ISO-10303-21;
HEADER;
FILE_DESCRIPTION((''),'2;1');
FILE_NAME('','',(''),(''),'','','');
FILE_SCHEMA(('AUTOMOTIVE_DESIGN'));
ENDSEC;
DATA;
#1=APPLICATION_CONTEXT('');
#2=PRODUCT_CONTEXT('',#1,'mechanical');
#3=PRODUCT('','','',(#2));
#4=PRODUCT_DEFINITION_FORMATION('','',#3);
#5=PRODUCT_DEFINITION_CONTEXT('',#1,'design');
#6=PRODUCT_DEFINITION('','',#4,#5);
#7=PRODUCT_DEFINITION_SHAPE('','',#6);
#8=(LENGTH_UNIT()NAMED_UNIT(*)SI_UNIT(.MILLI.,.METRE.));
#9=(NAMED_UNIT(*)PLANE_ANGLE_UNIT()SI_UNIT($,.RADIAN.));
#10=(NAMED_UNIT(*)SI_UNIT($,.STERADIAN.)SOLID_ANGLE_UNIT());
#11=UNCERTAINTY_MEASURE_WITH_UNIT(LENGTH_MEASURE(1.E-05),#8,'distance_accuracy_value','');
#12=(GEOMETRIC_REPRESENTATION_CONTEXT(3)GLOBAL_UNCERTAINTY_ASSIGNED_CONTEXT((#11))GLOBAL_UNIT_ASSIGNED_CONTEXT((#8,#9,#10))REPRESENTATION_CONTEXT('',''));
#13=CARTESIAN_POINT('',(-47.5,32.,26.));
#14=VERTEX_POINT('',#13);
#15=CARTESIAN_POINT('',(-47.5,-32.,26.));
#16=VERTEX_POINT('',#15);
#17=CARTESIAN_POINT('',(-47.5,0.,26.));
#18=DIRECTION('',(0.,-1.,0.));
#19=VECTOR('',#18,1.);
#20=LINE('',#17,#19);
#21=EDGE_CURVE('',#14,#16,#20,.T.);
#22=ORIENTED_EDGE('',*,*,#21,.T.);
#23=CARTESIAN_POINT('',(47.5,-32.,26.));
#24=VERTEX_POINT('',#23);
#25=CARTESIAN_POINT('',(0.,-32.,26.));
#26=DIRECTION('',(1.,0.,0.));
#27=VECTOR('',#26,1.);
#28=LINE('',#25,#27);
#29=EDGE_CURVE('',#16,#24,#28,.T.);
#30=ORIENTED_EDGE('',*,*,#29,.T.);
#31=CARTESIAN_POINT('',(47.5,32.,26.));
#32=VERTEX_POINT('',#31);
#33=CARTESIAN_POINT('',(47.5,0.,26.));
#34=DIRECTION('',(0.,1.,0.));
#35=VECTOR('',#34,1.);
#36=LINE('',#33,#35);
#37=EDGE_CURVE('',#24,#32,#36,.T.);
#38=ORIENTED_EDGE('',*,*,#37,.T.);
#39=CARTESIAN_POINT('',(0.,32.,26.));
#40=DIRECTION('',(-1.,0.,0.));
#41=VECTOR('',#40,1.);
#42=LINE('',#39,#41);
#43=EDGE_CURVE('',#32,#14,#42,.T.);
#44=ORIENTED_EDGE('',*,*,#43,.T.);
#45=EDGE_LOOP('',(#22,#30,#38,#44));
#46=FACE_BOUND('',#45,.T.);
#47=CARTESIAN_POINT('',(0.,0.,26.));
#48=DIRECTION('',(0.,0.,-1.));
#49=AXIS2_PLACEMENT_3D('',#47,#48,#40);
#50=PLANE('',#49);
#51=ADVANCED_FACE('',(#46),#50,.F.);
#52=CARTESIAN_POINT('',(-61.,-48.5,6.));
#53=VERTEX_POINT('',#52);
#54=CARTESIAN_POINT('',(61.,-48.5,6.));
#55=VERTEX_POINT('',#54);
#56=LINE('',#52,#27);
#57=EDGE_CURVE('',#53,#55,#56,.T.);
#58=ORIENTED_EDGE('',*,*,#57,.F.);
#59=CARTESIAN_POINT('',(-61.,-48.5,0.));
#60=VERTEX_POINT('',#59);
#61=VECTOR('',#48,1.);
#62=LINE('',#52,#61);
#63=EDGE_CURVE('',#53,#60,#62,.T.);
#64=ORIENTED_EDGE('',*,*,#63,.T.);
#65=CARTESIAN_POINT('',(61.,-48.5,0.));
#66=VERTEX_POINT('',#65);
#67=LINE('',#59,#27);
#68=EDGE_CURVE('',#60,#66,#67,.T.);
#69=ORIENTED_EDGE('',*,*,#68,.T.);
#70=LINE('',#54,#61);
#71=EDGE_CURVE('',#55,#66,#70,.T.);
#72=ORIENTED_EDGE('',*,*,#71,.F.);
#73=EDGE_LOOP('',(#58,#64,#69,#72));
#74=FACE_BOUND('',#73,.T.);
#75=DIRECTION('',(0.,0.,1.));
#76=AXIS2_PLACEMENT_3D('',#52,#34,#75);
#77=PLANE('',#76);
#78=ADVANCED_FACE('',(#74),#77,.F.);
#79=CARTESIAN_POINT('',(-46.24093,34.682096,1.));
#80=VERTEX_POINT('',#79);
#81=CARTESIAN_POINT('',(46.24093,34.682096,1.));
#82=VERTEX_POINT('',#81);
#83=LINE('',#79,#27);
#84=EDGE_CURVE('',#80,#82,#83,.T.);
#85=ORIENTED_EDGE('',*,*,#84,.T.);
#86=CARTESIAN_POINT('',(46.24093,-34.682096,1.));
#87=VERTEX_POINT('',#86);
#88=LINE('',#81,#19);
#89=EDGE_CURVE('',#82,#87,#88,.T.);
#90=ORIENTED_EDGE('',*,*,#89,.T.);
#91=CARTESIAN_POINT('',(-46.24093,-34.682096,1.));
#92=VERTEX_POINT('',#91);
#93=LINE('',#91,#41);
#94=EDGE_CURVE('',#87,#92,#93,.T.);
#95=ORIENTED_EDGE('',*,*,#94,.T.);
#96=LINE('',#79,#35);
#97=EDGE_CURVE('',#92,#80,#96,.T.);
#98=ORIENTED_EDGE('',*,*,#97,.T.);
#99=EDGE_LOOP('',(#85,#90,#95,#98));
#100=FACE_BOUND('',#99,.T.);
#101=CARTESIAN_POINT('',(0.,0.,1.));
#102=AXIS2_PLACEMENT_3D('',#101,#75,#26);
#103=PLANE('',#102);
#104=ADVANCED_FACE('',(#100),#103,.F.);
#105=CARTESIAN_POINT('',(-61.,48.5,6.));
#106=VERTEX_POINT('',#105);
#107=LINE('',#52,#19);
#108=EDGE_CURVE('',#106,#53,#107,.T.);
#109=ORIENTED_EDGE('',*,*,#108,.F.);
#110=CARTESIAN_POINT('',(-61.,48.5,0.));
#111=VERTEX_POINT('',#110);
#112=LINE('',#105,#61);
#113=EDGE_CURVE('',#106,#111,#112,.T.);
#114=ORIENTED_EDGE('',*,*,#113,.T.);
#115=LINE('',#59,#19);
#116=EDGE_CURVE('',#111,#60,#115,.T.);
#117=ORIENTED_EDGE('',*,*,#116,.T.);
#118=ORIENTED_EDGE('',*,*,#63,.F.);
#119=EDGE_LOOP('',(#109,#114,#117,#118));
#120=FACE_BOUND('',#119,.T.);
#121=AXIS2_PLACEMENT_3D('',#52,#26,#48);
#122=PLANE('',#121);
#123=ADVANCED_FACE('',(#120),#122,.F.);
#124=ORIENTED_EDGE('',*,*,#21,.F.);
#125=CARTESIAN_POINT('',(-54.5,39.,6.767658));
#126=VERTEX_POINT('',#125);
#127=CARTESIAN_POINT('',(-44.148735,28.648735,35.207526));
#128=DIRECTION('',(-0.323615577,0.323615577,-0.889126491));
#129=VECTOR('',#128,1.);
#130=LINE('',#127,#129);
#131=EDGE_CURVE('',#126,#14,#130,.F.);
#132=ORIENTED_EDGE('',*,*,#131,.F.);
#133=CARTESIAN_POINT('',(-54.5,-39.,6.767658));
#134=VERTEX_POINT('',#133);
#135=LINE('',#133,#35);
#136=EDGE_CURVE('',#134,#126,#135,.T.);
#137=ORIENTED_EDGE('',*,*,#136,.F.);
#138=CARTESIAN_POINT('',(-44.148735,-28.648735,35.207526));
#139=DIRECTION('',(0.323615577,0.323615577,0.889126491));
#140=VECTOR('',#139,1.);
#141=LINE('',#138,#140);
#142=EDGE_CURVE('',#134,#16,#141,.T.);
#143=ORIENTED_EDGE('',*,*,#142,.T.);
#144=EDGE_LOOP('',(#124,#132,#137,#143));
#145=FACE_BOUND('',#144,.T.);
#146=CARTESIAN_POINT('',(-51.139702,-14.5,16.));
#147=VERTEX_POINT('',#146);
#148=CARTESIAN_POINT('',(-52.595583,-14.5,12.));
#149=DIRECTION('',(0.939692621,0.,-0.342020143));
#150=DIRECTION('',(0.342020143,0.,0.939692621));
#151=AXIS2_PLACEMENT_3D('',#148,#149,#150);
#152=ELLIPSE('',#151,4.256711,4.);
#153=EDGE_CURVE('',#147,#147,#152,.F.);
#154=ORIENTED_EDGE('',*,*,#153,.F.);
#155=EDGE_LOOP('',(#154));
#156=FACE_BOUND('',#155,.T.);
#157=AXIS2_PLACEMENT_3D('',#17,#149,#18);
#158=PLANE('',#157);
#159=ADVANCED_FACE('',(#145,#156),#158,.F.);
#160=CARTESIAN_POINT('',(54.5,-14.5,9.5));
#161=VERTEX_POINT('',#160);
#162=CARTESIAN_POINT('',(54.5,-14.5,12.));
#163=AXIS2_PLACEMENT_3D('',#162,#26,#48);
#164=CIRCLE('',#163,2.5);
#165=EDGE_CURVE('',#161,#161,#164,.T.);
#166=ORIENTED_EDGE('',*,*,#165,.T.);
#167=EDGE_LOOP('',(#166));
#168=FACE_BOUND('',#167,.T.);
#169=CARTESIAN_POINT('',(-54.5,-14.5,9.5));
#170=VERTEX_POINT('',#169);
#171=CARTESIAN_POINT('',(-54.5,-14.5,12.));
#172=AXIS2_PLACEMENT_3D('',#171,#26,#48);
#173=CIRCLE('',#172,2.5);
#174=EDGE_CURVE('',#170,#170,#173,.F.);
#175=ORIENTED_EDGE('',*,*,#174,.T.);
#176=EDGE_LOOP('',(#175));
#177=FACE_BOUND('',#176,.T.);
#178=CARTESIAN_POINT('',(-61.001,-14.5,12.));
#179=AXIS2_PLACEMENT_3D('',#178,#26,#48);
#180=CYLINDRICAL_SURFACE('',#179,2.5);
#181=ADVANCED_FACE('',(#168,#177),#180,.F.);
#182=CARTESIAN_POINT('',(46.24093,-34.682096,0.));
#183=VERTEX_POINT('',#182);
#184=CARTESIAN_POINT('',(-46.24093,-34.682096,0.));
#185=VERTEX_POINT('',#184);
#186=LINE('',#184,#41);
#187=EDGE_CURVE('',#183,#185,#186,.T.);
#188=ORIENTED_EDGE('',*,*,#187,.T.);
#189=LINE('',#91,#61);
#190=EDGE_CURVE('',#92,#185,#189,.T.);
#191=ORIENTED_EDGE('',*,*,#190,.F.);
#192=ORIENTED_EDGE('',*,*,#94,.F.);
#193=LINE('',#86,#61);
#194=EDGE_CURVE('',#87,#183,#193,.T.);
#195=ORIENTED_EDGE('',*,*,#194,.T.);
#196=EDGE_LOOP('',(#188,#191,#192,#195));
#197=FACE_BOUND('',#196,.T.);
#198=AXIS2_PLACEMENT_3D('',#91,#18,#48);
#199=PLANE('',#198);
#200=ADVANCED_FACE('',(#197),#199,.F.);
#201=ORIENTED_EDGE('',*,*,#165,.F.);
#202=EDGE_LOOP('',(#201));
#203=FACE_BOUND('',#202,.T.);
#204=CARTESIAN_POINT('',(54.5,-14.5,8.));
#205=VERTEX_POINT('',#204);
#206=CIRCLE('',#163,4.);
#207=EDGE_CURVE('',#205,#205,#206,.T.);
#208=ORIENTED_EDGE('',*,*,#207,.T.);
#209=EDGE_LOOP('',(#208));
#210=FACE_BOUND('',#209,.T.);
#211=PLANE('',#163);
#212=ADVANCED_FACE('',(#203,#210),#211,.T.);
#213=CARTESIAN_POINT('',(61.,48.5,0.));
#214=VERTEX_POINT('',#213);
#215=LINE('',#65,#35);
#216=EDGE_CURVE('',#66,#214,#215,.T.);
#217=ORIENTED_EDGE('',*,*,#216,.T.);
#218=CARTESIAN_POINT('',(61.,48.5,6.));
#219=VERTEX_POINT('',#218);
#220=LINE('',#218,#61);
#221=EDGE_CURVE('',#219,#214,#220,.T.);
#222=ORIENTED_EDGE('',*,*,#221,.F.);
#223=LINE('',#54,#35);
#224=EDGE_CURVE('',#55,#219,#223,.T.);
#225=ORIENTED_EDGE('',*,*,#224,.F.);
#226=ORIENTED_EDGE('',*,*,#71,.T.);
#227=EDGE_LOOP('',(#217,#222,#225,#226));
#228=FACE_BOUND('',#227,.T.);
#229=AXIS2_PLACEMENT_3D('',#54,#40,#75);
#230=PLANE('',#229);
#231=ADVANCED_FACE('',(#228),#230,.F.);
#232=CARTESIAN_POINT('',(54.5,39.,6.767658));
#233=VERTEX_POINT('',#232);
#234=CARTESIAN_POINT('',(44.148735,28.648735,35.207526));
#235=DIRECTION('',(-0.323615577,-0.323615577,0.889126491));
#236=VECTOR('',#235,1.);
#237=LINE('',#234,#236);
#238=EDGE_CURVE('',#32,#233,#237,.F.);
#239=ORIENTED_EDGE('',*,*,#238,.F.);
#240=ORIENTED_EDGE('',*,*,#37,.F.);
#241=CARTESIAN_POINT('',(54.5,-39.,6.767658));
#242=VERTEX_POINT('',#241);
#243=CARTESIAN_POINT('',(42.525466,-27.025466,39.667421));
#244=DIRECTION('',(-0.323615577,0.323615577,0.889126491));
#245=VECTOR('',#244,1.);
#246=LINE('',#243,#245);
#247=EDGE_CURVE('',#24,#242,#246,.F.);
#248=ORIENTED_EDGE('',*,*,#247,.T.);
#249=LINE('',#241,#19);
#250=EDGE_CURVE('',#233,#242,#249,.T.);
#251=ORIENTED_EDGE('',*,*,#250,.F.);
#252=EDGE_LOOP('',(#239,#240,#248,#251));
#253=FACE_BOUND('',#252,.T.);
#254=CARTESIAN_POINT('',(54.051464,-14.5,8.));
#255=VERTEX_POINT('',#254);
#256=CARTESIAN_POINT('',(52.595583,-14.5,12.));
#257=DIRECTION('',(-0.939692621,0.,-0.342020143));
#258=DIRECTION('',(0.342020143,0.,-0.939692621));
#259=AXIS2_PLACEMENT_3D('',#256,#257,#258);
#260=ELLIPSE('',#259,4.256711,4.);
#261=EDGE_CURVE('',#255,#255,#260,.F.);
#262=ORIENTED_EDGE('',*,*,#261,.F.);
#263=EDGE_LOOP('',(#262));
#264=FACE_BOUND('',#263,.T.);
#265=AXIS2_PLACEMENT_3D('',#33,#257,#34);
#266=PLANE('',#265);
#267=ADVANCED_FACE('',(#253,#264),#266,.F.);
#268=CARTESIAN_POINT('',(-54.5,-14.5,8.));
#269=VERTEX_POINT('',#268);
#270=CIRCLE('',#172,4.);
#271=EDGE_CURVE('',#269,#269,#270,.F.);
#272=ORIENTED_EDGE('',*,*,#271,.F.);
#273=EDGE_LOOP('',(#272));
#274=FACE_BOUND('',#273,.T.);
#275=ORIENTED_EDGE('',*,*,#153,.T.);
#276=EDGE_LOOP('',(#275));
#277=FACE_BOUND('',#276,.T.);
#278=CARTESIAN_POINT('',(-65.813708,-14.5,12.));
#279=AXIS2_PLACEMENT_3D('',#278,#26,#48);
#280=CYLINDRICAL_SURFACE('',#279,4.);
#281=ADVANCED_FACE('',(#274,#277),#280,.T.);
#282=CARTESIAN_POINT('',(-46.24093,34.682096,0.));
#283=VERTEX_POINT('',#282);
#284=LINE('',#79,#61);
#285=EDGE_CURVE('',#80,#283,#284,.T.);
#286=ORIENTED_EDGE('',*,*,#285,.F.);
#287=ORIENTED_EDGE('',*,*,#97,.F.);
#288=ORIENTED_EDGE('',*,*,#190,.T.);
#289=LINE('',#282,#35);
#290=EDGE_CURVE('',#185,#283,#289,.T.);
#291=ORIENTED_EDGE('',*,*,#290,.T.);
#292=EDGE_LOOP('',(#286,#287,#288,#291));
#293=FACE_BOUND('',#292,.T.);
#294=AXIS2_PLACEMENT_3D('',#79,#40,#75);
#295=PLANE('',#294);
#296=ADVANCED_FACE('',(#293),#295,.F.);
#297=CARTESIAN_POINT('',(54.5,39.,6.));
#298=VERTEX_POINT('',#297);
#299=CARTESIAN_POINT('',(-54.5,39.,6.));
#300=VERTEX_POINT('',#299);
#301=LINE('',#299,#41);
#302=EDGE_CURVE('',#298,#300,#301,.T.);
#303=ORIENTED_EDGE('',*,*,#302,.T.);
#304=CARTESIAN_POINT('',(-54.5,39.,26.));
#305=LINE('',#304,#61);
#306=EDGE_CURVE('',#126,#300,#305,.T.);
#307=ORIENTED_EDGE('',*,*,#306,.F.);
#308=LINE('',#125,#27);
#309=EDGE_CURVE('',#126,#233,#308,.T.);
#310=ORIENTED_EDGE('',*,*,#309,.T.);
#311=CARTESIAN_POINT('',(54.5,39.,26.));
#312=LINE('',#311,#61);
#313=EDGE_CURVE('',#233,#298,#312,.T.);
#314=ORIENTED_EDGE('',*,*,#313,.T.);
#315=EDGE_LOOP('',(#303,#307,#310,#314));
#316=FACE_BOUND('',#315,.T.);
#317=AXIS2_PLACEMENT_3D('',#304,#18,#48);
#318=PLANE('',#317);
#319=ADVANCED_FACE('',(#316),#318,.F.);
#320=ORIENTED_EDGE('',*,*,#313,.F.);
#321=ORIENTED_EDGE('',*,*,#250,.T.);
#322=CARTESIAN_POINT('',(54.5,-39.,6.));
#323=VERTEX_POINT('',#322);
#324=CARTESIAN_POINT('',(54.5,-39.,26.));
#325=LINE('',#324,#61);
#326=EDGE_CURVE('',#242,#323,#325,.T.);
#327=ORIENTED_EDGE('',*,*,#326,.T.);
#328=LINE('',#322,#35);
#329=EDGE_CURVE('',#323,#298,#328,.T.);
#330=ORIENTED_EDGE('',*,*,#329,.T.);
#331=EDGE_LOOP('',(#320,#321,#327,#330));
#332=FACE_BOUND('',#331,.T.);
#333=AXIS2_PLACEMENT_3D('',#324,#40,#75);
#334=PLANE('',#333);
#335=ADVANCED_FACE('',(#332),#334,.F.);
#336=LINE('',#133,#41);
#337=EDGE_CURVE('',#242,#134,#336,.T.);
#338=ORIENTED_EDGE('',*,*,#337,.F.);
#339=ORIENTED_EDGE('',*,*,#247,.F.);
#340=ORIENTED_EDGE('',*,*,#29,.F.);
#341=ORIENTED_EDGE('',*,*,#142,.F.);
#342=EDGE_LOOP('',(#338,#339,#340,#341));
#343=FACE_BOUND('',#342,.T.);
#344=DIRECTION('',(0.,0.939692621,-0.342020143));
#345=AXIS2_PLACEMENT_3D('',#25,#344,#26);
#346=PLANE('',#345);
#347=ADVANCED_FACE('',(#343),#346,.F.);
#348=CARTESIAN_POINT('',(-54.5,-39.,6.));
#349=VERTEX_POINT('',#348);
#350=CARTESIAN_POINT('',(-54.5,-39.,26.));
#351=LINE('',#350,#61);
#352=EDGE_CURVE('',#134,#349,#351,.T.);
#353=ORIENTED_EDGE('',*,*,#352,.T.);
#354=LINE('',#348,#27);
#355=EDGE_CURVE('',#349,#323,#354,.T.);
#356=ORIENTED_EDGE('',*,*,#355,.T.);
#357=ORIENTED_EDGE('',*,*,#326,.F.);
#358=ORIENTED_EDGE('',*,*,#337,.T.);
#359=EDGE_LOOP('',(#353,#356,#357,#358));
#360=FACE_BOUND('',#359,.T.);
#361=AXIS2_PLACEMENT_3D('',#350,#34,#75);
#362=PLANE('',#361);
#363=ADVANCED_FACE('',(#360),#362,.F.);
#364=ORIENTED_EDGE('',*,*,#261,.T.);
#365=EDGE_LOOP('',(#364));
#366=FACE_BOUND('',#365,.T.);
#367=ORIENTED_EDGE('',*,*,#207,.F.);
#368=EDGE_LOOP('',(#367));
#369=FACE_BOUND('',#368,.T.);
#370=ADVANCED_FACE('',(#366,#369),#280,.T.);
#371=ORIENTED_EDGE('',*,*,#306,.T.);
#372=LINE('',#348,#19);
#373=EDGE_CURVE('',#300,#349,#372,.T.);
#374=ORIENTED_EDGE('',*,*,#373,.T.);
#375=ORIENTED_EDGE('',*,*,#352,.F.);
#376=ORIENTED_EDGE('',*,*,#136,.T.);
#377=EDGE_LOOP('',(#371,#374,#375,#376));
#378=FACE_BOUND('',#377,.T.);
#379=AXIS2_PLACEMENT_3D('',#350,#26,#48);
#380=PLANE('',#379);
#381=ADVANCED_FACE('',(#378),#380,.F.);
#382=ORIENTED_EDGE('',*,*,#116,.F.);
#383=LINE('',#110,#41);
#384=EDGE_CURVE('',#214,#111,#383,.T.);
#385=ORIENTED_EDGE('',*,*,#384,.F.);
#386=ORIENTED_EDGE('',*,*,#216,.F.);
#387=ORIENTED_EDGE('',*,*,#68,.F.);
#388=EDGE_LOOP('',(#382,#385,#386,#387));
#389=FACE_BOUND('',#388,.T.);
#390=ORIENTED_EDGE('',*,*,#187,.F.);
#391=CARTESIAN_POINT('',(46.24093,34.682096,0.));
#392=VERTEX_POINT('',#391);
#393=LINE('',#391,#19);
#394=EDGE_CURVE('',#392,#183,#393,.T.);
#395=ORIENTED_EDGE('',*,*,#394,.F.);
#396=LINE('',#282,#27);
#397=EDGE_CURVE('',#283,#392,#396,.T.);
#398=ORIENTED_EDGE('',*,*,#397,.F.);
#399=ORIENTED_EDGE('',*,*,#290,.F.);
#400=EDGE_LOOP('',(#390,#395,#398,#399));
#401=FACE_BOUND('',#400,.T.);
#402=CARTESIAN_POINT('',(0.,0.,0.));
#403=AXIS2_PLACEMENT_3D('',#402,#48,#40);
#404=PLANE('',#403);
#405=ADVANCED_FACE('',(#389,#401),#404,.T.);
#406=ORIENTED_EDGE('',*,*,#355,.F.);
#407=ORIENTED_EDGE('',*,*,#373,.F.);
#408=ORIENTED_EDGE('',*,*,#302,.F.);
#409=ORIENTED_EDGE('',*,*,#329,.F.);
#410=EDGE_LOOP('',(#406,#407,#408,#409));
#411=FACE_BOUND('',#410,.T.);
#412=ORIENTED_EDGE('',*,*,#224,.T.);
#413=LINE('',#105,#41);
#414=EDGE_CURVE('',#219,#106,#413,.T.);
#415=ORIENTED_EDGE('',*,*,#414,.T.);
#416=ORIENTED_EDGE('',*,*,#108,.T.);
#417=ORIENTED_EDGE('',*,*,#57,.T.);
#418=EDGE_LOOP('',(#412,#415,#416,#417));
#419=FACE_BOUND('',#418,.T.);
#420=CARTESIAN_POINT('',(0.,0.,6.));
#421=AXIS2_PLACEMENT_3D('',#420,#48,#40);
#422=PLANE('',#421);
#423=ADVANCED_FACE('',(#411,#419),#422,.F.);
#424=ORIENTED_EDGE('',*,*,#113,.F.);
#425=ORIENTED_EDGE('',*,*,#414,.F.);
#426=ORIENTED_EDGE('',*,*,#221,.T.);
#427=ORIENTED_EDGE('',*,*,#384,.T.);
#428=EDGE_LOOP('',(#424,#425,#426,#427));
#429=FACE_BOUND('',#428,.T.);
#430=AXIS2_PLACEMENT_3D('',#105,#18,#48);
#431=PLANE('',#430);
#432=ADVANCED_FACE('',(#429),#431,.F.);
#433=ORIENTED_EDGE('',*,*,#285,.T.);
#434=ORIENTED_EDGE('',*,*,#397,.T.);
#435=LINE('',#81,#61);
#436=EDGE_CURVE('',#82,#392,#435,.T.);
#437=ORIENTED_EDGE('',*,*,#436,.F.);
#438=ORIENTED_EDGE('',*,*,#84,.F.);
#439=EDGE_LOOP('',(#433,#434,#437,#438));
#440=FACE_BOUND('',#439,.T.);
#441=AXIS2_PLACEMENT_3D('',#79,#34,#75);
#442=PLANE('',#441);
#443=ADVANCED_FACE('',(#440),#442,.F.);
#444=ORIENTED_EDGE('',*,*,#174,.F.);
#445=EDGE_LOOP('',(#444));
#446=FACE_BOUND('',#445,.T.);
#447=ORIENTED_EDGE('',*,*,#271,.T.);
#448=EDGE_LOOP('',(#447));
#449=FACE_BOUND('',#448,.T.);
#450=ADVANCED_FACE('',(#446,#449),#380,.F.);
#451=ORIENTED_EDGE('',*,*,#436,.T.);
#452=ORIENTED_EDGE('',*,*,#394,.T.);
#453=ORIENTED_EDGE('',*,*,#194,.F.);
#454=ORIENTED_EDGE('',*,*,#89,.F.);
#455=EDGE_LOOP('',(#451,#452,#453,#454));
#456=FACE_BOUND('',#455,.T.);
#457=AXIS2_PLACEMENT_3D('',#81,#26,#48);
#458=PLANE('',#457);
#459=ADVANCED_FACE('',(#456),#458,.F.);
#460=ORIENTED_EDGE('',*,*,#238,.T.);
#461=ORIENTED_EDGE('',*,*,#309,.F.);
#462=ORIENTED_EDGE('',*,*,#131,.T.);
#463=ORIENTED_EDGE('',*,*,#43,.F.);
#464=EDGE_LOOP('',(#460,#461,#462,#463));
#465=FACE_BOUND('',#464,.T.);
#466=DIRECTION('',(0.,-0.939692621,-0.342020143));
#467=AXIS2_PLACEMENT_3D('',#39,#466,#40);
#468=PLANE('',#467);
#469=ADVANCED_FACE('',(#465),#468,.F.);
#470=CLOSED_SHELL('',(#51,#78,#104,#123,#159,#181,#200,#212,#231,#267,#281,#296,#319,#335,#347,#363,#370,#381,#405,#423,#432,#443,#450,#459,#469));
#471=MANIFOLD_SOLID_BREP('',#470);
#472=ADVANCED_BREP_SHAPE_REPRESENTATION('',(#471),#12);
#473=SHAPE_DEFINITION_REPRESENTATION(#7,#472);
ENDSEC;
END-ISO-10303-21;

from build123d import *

# Parameters (mm, degrees)
SKIZZE1_W                       = 122
SKIZZE1_H                       = 97
AUFSATZ_LINEAR_AUSTRAGEN1_DEPTH = 6
SKIZZE2_W                       = 109
SKIZZE2_H                       = 78
AUFSATZ_LINEAR_AUSTRAGEN2_DEPTH = 20
SCHNITT_LINEAR_AUSTRAGEN1_REACH = 129.939
SKIZZE3_R                       = 2.5
FASE1_SIZE                      = 19.232341936
FASE1_SIZE_2                    = 7
AUFSATZ_LINEAR_AUSTRAGEN3_REACH = 129.939
SKIZZE4_R                       = 4
SKIZZE4_R_2                     = 2.5
SKIZZE5_W                       = 92.481860848
SKIZZE5_H                       = 69.364192104
SCHNITT_LINEAR_AUSTRAGEN2_DEPTH = 1


with BuildPart() as part:
    # Skizze1 → Aufsatz-Linear austragen1 (new body)
    with BuildSketch(Plane.XY):
        Rectangle(SKIZZE1_W, SKIZZE1_H)
    extrude(amount=AUFSATZ_LINEAR_AUSTRAGEN1_DEPTH)

    # Skizze2 → Aufsatz-Linear austragen2 (add)
    with BuildSketch(Plane.XY.offset(6)):
        Rectangle(SKIZZE2_W, SKIZZE2_H)
    extrude(amount=AUFSATZ_LINEAR_AUSTRAGEN2_DEPTH)

    # Skizze3 → Schnitt-Linear austragen1 (cut, up to next)
    with BuildSketch(Plane(origin=(54.5, 0, 0), x_dir=(0, 0, -1), z_dir=(1, 0, 0)), mode=Mode.PRIVATE) as schnitt_linear_austragen1_sk1:
        with Locations((-12, -14.5)):
            Circle(SKIZZE3_R)
    schnitt_linear_austragen1_tool1 = extrude(schnitt_linear_austragen1_sk1.sketch, amount=-SCHNITT_LINEAR_AUSTRAGEN1_REACH, mode=Mode.PRIVATE) & part.part
    add(schnitt_linear_austragen1_tool1.solids().sort_by_distance((54.5, -14.5, 12))[0], mode=Mode.SUBTRACT)

    # Fase1
    # the kernel refuses this chamfer: 19.232341936, 7 mm, written as the material it takes off along each edge
    with BuildSketch(Plane(origin=(54.5, -88.892440145, 26), x_dir=(0.013184058198645607, 0, -0.9999130865277316), z_dir=(0, 1, 0)), Plane(origin=(-54.5, 88.892440145, 26), x_dir=(-0.013184058198645607, 0, -0.9999130865277316), z_dir=(0, -1, 0))) as fase1_piece_1:
        Polygon((FASE1_SIZE * 0.999913086537, FASE1_SIZE * 0.0131840581988), (-FASE1_SIZE_2 * 0.0131840581986, FASE1_SIZE_2 * 0.999913086528), (0, 0), align=None)
    extrude(amount=177.784880291, mode=Mode.SUBTRACT)
    with BuildSketch(Plane(origin=(104.392440145, 39, 26), x_dir=(0, 0.013184058198645607, -0.9999130865277316), z_dir=(-1, 0, 0)), Plane(origin=(-104.392440145, -39, 26), x_dir=(0, -0.013184058198645607, -0.9999130865277316), z_dir=(1, 0, 0))) as fase1_piece_2:
        Polygon((FASE1_SIZE * 0.999913086537, FASE1_SIZE * 0.0131840581988), (-FASE1_SIZE_2 * 0.0131840581986, FASE1_SIZE_2 * 0.999913086528), (0, 0), align=None)
    extrude(amount=208.784880291, mode=Mode.SUBTRACT)

    # Aufsatz-Linear austragen3: up to this face of the body (flat: up to its plane)
    aufsatz_linear_austragen3_end = Plane(part.part.faces().sort_by_distance((-54.5, 0, 6.383829032))[0])
    # Skizze4 → Aufsatz-Linear austragen3 (add, up to the picked face)
    with BuildSketch(Plane(origin=(54.5, 0, 0), x_dir=(0, 0, -1), z_dir=(1, 0, 0)), mode=Mode.PRIVATE) as aufsatz_linear_austragen3_sk1:
        with Locations((-12, -14.5)):
            Circle(SKIZZE4_R)
        with Locations((-12, -14.5)):
            Circle(SKIZZE4_R_2, mode=Mode.SUBTRACT)
    aufsatz_linear_austragen3_tool1 = split(extrude(aufsatz_linear_austragen3_sk1.sketch, amount=-AUFSATZ_LINEAR_AUSTRAGEN3_REACH, mode=Mode.PRIVATE), bisect_by=aufsatz_linear_austragen3_end, keep=Keep.BOTH, mode=Mode.PRIVATE)
    add(aufsatz_linear_austragen3_tool1.solids().sort_by(Axis((54.5, -14.5, 15.886863), (-1, 0, 0)))[0])

    # Skizze5 → Schnitt-Linear austragen2 (cut)
    with BuildSketch(Plane(origin=(0, 0, 0), x_dir=(-1, 0, 0), z_dir=(0, 0, -1))):
        Rectangle(SKIZZE5_W, SKIZZE5_H)
    extrude(amount=-SCHNITT_LINEAR_AUSTRAGEN2_DEPTH, mode=Mode.SUBTRACT)


solid = part.part
